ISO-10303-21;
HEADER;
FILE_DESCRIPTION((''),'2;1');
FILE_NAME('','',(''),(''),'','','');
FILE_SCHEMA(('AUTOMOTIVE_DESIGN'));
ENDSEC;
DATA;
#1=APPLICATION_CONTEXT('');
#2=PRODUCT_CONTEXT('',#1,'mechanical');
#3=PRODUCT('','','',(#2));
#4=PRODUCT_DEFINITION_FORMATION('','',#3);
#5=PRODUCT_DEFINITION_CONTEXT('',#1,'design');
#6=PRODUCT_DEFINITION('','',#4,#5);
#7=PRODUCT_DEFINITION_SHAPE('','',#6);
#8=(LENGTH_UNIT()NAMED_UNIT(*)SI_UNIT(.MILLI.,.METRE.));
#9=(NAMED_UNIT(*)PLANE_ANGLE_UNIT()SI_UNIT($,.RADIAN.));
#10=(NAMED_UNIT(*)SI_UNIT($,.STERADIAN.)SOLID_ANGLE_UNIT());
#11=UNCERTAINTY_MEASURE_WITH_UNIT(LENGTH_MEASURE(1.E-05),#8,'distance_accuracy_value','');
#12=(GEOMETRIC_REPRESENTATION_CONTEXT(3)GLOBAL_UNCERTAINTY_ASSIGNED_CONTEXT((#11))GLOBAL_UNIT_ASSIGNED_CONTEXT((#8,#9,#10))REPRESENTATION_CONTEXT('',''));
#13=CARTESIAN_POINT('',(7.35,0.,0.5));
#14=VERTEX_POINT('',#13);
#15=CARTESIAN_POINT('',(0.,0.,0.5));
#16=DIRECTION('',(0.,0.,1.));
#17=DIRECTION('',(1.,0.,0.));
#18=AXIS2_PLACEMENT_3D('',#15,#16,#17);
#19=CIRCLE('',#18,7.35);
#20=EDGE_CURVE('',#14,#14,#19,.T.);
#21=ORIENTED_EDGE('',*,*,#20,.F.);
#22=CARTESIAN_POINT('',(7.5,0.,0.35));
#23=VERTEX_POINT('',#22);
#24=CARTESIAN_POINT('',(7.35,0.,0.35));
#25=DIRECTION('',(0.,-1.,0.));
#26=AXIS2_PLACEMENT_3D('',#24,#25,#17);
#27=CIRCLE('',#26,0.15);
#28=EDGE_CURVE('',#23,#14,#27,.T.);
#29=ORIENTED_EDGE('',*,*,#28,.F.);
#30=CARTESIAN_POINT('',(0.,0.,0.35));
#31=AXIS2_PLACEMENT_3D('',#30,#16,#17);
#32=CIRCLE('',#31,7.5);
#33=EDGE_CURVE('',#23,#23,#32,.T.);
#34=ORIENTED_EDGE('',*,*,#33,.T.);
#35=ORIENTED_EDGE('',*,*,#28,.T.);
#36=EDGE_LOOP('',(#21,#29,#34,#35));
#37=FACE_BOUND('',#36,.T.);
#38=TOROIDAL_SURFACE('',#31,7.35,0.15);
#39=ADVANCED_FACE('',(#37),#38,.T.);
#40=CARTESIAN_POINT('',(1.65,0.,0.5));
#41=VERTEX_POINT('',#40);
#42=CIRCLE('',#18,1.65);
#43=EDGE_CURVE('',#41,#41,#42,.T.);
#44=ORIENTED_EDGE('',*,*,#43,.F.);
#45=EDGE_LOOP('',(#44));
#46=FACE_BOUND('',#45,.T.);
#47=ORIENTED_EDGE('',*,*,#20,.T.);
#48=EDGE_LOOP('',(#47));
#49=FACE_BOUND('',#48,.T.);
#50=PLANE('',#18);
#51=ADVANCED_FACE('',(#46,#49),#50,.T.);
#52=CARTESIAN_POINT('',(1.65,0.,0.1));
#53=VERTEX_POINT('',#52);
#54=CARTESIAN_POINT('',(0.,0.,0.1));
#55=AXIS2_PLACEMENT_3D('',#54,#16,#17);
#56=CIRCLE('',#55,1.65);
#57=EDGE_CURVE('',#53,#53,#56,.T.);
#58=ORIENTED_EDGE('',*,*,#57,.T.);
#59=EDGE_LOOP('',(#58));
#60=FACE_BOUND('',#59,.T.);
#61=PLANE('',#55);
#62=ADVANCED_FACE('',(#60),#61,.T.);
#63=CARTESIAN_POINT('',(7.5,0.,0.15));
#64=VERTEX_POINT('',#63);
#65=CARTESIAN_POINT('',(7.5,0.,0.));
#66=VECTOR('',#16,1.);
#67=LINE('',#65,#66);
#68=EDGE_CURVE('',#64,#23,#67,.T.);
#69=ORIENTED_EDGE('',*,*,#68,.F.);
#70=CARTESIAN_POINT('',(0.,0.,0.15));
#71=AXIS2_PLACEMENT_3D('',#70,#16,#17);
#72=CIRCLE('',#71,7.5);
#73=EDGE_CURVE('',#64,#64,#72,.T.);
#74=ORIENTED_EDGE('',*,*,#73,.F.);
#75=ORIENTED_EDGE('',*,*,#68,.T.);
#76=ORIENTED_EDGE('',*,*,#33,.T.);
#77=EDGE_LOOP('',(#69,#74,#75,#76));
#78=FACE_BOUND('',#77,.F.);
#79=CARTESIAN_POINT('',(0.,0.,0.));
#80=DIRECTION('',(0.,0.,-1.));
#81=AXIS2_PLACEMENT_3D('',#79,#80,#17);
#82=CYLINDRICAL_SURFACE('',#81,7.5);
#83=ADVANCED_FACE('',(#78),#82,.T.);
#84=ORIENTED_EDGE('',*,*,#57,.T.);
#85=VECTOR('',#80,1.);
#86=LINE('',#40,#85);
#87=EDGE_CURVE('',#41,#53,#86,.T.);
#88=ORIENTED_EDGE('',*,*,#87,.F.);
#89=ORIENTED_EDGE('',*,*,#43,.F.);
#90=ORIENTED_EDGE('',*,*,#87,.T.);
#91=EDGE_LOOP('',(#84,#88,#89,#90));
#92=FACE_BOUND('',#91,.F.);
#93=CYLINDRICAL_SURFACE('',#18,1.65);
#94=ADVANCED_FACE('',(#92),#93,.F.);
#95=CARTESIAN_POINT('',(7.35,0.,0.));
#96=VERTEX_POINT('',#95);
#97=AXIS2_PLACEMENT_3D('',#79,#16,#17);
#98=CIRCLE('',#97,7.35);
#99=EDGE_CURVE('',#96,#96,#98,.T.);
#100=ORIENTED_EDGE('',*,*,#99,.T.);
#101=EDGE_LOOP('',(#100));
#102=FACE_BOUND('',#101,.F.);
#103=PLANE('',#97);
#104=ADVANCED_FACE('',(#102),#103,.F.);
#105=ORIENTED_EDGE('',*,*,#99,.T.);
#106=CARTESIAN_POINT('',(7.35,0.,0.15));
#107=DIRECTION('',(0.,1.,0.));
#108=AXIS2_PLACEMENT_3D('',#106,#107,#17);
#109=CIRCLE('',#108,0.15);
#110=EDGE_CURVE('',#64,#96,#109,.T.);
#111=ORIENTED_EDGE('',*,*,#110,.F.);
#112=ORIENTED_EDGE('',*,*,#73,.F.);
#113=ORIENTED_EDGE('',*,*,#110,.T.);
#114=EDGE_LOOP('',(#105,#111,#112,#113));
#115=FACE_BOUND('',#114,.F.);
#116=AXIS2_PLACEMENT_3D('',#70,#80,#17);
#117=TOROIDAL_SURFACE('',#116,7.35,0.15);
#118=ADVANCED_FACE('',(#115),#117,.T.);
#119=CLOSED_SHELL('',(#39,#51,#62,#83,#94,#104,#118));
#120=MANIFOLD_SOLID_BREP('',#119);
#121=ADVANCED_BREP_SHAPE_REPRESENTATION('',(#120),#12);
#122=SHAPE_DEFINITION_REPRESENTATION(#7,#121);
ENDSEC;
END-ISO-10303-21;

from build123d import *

# Parameters (mm, degrees)
F0_R     = 7.5
F1_DEPTH = 0.5
F2_R     = 0.15
F3_R     = 1.65
F4_DEPTH = 0.4


# Not quite as in the source:
# - a feature names something its author has since deleted; it is built from what else it names


with BuildPart() as f1:
    # F0 (on Top) → F1 (new body)
    with BuildSketch(Plane.XY):
        Circle(F0_R)
    extrude(amount=F1_DEPTH)

    # F2
    f2_edges = [f1.edges().sort_by_distance(p)[0] for p in [
        (-7.5, 0, 0.5),
        (-7.5, 0, 0),
    ]]
    fillet(f2_edges, radius=F2_R)

    # F3 (on face) → F4 (cut)
    with BuildSketch(Plane.XY.offset(0.5)):
        Circle(F3_R)
    extrude(amount=-F4_DEPTH, mode=Mode.SUBTRACT)


solid = f1.part
